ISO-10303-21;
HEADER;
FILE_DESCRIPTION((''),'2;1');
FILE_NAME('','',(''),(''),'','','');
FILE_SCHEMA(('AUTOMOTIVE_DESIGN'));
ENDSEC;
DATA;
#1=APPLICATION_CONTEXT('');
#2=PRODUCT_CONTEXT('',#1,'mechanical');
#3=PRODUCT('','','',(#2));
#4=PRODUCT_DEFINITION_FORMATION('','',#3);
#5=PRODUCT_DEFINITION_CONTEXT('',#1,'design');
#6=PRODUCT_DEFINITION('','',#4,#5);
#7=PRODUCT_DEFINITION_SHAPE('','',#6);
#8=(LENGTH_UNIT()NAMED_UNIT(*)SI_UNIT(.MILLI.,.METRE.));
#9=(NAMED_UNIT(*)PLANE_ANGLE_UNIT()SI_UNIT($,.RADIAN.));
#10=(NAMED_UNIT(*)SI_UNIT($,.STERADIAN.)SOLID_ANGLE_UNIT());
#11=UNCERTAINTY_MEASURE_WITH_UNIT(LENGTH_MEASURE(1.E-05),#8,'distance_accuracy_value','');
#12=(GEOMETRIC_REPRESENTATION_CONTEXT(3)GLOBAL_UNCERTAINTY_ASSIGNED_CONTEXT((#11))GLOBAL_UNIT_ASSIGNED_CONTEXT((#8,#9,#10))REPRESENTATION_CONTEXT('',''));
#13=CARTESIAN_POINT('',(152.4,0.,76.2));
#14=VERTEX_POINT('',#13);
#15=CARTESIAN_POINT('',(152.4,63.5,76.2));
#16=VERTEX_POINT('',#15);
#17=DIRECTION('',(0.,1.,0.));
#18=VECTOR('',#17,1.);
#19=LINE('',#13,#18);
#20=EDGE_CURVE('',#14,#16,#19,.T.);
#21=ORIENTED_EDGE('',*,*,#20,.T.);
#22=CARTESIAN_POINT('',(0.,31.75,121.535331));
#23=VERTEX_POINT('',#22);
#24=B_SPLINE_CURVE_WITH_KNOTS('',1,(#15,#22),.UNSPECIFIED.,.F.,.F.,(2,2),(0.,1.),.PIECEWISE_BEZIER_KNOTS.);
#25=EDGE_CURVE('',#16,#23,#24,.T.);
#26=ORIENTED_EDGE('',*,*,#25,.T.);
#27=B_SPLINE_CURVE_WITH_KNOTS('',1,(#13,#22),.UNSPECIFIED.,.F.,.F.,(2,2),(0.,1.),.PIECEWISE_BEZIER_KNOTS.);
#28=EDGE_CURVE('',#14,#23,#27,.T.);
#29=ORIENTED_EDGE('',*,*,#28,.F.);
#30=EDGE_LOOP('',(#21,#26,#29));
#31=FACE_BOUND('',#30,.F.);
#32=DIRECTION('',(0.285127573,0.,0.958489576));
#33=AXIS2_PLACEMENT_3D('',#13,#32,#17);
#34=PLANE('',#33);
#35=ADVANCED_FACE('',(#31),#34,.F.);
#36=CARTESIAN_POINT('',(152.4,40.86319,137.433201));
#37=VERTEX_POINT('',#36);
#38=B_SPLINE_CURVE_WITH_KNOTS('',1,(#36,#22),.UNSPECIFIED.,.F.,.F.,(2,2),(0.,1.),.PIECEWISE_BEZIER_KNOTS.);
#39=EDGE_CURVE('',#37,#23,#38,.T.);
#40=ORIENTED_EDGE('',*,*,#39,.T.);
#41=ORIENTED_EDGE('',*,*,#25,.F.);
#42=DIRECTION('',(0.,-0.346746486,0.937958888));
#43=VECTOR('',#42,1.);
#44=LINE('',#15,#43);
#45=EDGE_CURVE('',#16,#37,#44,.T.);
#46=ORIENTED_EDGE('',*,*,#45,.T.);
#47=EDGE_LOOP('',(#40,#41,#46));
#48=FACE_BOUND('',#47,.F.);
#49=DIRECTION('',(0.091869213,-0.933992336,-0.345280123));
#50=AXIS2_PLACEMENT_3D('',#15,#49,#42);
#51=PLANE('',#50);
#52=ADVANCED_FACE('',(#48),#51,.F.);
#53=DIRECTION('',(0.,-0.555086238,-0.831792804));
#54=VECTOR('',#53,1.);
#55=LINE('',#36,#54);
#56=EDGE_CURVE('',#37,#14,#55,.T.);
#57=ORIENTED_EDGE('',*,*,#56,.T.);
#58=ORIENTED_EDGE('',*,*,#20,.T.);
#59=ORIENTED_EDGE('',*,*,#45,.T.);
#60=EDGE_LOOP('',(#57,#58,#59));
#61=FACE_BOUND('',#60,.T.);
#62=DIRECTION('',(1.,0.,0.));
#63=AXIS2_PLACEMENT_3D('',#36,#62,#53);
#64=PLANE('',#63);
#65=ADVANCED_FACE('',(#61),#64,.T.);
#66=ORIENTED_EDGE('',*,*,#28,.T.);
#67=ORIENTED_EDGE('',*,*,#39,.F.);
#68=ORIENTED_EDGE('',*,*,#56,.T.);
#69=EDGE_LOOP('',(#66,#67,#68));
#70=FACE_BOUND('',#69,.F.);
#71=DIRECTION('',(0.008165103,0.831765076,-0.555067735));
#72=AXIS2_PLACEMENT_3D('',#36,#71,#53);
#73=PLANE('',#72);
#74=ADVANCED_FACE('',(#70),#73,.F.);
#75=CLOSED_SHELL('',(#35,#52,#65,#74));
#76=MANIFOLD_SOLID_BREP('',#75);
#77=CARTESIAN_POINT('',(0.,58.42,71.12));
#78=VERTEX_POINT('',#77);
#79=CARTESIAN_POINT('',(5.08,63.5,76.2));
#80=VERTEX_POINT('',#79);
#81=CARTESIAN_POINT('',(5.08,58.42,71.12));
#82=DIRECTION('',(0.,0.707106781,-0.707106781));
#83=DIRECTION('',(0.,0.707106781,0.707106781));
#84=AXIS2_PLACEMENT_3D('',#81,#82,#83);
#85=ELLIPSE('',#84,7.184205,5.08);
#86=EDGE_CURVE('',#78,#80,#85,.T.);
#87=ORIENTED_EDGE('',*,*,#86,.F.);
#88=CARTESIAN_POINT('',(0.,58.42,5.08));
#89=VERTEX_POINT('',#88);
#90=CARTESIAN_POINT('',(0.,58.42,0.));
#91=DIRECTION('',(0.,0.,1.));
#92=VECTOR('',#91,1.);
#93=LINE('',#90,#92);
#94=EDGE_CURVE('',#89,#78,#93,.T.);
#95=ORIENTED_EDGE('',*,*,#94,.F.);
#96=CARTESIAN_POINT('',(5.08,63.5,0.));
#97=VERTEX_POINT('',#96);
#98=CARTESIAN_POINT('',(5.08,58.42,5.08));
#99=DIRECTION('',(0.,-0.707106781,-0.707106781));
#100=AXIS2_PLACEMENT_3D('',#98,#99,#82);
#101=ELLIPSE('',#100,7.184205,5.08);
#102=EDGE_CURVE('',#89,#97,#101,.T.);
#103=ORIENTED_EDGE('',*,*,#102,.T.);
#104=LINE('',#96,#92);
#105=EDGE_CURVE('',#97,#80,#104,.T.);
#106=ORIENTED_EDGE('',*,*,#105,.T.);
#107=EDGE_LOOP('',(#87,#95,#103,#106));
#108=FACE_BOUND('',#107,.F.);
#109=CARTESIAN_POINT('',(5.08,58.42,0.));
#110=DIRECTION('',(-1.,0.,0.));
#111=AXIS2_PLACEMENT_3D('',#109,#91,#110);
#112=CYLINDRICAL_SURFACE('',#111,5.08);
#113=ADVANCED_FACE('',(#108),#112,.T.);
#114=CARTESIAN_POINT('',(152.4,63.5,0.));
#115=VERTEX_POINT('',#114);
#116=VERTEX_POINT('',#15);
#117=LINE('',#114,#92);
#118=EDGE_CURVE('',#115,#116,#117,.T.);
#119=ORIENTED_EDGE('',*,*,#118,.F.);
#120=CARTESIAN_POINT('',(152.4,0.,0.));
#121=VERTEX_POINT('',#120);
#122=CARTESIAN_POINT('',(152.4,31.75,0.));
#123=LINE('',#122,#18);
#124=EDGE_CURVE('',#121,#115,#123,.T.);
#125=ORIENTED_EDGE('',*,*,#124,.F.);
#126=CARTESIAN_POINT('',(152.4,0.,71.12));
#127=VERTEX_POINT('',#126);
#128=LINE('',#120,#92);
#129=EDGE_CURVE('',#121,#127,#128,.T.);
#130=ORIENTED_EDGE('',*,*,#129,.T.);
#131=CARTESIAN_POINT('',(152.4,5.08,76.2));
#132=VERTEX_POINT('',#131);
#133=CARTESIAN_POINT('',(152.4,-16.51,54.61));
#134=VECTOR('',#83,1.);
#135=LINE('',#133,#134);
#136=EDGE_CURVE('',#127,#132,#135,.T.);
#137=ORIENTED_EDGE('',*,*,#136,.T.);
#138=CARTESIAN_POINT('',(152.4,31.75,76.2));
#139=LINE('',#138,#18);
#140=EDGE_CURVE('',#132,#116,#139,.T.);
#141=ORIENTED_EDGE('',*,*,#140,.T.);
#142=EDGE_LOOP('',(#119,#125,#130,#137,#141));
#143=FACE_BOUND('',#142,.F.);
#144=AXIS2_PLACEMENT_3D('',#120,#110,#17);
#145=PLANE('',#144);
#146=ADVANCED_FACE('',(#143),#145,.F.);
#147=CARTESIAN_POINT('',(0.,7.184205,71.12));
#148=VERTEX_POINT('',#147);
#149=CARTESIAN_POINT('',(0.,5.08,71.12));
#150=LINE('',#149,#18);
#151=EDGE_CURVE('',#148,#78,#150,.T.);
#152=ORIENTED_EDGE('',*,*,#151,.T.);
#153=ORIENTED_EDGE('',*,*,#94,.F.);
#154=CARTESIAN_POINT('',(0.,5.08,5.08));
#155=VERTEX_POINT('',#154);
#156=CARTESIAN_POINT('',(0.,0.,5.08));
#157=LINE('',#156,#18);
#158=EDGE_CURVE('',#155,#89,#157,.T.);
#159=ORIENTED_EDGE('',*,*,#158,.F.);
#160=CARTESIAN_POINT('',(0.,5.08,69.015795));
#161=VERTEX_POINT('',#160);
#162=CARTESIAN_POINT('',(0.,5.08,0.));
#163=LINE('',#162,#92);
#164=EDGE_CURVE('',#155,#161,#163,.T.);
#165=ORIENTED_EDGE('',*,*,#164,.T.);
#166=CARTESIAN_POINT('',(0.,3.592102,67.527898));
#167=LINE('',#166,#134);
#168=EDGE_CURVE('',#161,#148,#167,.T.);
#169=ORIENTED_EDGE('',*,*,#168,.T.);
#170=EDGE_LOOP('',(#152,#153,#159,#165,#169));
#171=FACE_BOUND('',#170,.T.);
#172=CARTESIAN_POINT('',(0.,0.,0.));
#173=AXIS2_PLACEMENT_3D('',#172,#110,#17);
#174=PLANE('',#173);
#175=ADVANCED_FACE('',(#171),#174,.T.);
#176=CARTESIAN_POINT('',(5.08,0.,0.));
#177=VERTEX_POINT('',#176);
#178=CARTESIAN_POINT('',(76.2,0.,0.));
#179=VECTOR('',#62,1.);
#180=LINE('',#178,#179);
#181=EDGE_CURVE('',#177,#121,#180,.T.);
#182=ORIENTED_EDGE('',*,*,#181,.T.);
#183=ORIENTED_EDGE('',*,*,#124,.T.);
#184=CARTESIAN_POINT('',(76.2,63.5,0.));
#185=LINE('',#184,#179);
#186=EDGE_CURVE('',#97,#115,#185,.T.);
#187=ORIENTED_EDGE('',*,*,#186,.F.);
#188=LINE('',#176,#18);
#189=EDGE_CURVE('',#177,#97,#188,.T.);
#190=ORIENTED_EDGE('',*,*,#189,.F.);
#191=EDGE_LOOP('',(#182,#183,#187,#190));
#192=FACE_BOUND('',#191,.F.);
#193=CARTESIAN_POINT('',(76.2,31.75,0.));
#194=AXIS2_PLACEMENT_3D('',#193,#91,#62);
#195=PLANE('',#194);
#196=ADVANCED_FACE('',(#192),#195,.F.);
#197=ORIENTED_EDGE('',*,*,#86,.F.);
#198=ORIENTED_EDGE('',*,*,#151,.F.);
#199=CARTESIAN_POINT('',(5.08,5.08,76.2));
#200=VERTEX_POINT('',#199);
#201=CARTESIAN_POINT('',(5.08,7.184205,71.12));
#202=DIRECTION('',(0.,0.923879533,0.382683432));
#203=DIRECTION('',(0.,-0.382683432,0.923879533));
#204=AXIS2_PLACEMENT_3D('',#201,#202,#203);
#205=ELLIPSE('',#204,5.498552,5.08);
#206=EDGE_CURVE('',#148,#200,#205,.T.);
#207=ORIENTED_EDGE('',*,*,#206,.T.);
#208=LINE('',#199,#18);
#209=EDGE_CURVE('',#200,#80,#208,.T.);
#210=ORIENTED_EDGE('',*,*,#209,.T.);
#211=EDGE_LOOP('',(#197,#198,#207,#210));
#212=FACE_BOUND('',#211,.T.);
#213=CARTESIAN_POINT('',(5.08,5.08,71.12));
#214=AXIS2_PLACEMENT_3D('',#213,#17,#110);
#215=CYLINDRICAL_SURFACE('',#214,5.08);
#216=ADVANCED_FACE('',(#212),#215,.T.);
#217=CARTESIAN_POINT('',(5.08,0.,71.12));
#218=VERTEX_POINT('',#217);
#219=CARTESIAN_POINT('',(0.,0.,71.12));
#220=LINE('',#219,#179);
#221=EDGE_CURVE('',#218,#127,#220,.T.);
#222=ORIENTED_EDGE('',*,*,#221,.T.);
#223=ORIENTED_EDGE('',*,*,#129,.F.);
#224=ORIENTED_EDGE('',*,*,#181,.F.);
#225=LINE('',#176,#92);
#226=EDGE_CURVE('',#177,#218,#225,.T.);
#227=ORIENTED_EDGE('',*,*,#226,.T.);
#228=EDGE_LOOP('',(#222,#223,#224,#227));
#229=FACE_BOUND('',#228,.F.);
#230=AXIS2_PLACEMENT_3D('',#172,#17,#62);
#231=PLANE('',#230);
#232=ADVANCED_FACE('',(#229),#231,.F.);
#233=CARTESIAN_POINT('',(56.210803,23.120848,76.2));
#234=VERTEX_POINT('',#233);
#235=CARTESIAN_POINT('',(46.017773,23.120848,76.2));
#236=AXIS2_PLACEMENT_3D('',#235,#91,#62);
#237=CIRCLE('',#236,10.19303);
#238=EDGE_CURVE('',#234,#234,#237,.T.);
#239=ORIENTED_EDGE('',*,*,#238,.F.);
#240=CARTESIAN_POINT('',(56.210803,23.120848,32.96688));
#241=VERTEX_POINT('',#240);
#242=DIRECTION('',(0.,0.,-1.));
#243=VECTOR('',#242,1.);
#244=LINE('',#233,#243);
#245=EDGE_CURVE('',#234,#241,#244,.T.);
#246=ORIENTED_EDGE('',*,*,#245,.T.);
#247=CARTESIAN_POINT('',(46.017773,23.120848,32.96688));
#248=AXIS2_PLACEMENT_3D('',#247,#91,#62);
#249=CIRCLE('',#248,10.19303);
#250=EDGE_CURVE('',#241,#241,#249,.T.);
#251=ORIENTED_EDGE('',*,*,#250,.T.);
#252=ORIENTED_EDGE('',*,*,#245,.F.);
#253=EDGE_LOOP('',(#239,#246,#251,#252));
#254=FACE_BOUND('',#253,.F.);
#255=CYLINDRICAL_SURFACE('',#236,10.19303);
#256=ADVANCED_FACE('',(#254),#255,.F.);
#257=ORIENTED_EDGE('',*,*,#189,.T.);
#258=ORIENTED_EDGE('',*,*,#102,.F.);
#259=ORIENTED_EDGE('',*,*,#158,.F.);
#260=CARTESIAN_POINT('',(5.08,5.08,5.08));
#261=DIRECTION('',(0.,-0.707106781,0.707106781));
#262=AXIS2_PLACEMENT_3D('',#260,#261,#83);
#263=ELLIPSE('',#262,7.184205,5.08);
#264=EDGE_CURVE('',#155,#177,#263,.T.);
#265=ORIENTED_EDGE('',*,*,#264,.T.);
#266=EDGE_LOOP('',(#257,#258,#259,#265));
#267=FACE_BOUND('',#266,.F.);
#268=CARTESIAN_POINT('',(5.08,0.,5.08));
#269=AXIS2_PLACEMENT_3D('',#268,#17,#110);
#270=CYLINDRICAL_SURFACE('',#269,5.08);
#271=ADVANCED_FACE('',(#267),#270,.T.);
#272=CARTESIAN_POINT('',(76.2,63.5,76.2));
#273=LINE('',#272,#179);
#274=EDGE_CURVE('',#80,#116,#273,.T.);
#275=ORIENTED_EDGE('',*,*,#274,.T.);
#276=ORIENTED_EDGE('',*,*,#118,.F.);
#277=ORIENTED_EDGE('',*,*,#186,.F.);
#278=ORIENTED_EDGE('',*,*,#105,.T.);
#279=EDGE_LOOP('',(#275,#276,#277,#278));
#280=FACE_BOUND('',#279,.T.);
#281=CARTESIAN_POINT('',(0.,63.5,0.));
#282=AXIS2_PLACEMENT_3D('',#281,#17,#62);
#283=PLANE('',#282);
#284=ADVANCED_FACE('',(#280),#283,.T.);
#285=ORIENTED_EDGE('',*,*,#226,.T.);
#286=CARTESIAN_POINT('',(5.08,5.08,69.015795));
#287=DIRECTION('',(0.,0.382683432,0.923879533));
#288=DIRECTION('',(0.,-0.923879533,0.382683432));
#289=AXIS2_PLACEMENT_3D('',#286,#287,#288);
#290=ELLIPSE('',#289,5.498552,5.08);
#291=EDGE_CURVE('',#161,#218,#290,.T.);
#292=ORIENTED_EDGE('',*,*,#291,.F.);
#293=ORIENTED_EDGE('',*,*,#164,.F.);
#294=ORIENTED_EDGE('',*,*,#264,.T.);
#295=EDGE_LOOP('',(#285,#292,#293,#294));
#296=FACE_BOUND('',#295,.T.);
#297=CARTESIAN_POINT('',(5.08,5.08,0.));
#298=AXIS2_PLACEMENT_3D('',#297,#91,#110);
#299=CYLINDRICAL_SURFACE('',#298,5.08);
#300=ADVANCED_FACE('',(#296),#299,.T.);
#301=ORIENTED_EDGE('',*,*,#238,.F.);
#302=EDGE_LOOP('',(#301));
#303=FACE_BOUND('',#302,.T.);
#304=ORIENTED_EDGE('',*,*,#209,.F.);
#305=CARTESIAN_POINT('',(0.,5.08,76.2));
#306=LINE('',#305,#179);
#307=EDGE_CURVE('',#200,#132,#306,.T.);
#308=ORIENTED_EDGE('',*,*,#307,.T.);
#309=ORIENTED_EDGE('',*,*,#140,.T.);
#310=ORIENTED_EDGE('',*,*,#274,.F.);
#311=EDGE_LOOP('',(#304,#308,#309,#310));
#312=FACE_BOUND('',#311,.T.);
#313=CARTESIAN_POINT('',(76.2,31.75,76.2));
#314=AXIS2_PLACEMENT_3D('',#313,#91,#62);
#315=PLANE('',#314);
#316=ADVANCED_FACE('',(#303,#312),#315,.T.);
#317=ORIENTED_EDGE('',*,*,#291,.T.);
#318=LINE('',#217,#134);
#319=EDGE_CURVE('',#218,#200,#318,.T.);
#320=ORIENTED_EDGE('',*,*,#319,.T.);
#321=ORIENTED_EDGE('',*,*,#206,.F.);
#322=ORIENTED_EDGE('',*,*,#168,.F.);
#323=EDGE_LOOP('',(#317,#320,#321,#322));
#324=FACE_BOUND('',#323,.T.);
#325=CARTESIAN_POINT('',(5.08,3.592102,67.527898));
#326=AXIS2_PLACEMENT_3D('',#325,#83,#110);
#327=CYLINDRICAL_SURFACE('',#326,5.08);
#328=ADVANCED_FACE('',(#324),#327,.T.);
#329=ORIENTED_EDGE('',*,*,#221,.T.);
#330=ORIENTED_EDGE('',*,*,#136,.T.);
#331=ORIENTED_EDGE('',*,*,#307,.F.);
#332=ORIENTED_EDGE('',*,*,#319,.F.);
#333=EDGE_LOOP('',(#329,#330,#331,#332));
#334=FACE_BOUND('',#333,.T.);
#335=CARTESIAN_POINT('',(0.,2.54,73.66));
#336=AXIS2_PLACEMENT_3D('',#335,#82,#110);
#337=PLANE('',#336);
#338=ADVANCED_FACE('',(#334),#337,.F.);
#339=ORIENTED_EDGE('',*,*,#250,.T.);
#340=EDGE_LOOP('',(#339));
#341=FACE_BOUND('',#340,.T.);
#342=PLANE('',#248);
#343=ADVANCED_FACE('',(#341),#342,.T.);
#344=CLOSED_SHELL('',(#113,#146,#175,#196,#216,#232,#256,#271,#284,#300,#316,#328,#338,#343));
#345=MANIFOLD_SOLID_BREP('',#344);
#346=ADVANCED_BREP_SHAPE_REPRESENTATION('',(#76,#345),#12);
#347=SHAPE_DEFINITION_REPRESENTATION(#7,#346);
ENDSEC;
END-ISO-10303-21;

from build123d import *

# Parameters (mm, degrees)
F0_W     = 152.4
F0_H     = 63.5
F1_DEPTH = 76.2
F4_R     = 10.1930298676
F5_DEPTH = 43.23312
F7_SIZE  = 5.08
F8_R     = 5.08


# Not quite as in the source:
# - a feature of the source that left no trace in its solid (it failed there, or was rolled back) is left out


with BuildPart() as f1:
    # F0 (on Top) → F1 (new body)
    with BuildSketch(Plane.XY):
        with Locations((76.2, 31.75)):
            Rectangle(F0_W, F0_H)
    extrude(amount=F1_DEPTH)

    # F4 (on face) → F5 (cut)
    with BuildSketch(Plane.XY.offset(76.2)):
        with Locations((46.0177734494, 23.120848462)):
            Circle(F4_R)
    extrude(amount=-F5_DEPTH, mode=Mode.SUBTRACT)

    # F7
    f7_edges = [f1.edges().sort_by_distance(p)[0] for p in [
        (76.2, 0, 76.2),
    ]]
    chamfer(f7_edges, length=F7_SIZE)

    # F8
    f8_edges = [f1.edges().sort_by_distance(p)[0] for p in [
        (0, 0, 35.56),
        (0, 2.54, 73.66),
        (0, 31.75, 0),
        (0, 34.29, 76.2),
        (0, 63.5, 38.1),
    ]]
    fillet(f8_edges, radius=F8_R)


with BuildPart() as f6:
    # F2 (on face) → F6 section 0
    with BuildSketch(Plane.YZ.offset(152.4), mode=Mode.PRIVATE) as f6_s0:
        Polygon((40.8631898463, 137.4332010746), (0, 76.2), (63.5, 76.2), align=None)
    loft([f6_s0.sketch, Vertex(0, 31.75, 121.5353310108)])


solid = Compound([f1.part, f6.part])
